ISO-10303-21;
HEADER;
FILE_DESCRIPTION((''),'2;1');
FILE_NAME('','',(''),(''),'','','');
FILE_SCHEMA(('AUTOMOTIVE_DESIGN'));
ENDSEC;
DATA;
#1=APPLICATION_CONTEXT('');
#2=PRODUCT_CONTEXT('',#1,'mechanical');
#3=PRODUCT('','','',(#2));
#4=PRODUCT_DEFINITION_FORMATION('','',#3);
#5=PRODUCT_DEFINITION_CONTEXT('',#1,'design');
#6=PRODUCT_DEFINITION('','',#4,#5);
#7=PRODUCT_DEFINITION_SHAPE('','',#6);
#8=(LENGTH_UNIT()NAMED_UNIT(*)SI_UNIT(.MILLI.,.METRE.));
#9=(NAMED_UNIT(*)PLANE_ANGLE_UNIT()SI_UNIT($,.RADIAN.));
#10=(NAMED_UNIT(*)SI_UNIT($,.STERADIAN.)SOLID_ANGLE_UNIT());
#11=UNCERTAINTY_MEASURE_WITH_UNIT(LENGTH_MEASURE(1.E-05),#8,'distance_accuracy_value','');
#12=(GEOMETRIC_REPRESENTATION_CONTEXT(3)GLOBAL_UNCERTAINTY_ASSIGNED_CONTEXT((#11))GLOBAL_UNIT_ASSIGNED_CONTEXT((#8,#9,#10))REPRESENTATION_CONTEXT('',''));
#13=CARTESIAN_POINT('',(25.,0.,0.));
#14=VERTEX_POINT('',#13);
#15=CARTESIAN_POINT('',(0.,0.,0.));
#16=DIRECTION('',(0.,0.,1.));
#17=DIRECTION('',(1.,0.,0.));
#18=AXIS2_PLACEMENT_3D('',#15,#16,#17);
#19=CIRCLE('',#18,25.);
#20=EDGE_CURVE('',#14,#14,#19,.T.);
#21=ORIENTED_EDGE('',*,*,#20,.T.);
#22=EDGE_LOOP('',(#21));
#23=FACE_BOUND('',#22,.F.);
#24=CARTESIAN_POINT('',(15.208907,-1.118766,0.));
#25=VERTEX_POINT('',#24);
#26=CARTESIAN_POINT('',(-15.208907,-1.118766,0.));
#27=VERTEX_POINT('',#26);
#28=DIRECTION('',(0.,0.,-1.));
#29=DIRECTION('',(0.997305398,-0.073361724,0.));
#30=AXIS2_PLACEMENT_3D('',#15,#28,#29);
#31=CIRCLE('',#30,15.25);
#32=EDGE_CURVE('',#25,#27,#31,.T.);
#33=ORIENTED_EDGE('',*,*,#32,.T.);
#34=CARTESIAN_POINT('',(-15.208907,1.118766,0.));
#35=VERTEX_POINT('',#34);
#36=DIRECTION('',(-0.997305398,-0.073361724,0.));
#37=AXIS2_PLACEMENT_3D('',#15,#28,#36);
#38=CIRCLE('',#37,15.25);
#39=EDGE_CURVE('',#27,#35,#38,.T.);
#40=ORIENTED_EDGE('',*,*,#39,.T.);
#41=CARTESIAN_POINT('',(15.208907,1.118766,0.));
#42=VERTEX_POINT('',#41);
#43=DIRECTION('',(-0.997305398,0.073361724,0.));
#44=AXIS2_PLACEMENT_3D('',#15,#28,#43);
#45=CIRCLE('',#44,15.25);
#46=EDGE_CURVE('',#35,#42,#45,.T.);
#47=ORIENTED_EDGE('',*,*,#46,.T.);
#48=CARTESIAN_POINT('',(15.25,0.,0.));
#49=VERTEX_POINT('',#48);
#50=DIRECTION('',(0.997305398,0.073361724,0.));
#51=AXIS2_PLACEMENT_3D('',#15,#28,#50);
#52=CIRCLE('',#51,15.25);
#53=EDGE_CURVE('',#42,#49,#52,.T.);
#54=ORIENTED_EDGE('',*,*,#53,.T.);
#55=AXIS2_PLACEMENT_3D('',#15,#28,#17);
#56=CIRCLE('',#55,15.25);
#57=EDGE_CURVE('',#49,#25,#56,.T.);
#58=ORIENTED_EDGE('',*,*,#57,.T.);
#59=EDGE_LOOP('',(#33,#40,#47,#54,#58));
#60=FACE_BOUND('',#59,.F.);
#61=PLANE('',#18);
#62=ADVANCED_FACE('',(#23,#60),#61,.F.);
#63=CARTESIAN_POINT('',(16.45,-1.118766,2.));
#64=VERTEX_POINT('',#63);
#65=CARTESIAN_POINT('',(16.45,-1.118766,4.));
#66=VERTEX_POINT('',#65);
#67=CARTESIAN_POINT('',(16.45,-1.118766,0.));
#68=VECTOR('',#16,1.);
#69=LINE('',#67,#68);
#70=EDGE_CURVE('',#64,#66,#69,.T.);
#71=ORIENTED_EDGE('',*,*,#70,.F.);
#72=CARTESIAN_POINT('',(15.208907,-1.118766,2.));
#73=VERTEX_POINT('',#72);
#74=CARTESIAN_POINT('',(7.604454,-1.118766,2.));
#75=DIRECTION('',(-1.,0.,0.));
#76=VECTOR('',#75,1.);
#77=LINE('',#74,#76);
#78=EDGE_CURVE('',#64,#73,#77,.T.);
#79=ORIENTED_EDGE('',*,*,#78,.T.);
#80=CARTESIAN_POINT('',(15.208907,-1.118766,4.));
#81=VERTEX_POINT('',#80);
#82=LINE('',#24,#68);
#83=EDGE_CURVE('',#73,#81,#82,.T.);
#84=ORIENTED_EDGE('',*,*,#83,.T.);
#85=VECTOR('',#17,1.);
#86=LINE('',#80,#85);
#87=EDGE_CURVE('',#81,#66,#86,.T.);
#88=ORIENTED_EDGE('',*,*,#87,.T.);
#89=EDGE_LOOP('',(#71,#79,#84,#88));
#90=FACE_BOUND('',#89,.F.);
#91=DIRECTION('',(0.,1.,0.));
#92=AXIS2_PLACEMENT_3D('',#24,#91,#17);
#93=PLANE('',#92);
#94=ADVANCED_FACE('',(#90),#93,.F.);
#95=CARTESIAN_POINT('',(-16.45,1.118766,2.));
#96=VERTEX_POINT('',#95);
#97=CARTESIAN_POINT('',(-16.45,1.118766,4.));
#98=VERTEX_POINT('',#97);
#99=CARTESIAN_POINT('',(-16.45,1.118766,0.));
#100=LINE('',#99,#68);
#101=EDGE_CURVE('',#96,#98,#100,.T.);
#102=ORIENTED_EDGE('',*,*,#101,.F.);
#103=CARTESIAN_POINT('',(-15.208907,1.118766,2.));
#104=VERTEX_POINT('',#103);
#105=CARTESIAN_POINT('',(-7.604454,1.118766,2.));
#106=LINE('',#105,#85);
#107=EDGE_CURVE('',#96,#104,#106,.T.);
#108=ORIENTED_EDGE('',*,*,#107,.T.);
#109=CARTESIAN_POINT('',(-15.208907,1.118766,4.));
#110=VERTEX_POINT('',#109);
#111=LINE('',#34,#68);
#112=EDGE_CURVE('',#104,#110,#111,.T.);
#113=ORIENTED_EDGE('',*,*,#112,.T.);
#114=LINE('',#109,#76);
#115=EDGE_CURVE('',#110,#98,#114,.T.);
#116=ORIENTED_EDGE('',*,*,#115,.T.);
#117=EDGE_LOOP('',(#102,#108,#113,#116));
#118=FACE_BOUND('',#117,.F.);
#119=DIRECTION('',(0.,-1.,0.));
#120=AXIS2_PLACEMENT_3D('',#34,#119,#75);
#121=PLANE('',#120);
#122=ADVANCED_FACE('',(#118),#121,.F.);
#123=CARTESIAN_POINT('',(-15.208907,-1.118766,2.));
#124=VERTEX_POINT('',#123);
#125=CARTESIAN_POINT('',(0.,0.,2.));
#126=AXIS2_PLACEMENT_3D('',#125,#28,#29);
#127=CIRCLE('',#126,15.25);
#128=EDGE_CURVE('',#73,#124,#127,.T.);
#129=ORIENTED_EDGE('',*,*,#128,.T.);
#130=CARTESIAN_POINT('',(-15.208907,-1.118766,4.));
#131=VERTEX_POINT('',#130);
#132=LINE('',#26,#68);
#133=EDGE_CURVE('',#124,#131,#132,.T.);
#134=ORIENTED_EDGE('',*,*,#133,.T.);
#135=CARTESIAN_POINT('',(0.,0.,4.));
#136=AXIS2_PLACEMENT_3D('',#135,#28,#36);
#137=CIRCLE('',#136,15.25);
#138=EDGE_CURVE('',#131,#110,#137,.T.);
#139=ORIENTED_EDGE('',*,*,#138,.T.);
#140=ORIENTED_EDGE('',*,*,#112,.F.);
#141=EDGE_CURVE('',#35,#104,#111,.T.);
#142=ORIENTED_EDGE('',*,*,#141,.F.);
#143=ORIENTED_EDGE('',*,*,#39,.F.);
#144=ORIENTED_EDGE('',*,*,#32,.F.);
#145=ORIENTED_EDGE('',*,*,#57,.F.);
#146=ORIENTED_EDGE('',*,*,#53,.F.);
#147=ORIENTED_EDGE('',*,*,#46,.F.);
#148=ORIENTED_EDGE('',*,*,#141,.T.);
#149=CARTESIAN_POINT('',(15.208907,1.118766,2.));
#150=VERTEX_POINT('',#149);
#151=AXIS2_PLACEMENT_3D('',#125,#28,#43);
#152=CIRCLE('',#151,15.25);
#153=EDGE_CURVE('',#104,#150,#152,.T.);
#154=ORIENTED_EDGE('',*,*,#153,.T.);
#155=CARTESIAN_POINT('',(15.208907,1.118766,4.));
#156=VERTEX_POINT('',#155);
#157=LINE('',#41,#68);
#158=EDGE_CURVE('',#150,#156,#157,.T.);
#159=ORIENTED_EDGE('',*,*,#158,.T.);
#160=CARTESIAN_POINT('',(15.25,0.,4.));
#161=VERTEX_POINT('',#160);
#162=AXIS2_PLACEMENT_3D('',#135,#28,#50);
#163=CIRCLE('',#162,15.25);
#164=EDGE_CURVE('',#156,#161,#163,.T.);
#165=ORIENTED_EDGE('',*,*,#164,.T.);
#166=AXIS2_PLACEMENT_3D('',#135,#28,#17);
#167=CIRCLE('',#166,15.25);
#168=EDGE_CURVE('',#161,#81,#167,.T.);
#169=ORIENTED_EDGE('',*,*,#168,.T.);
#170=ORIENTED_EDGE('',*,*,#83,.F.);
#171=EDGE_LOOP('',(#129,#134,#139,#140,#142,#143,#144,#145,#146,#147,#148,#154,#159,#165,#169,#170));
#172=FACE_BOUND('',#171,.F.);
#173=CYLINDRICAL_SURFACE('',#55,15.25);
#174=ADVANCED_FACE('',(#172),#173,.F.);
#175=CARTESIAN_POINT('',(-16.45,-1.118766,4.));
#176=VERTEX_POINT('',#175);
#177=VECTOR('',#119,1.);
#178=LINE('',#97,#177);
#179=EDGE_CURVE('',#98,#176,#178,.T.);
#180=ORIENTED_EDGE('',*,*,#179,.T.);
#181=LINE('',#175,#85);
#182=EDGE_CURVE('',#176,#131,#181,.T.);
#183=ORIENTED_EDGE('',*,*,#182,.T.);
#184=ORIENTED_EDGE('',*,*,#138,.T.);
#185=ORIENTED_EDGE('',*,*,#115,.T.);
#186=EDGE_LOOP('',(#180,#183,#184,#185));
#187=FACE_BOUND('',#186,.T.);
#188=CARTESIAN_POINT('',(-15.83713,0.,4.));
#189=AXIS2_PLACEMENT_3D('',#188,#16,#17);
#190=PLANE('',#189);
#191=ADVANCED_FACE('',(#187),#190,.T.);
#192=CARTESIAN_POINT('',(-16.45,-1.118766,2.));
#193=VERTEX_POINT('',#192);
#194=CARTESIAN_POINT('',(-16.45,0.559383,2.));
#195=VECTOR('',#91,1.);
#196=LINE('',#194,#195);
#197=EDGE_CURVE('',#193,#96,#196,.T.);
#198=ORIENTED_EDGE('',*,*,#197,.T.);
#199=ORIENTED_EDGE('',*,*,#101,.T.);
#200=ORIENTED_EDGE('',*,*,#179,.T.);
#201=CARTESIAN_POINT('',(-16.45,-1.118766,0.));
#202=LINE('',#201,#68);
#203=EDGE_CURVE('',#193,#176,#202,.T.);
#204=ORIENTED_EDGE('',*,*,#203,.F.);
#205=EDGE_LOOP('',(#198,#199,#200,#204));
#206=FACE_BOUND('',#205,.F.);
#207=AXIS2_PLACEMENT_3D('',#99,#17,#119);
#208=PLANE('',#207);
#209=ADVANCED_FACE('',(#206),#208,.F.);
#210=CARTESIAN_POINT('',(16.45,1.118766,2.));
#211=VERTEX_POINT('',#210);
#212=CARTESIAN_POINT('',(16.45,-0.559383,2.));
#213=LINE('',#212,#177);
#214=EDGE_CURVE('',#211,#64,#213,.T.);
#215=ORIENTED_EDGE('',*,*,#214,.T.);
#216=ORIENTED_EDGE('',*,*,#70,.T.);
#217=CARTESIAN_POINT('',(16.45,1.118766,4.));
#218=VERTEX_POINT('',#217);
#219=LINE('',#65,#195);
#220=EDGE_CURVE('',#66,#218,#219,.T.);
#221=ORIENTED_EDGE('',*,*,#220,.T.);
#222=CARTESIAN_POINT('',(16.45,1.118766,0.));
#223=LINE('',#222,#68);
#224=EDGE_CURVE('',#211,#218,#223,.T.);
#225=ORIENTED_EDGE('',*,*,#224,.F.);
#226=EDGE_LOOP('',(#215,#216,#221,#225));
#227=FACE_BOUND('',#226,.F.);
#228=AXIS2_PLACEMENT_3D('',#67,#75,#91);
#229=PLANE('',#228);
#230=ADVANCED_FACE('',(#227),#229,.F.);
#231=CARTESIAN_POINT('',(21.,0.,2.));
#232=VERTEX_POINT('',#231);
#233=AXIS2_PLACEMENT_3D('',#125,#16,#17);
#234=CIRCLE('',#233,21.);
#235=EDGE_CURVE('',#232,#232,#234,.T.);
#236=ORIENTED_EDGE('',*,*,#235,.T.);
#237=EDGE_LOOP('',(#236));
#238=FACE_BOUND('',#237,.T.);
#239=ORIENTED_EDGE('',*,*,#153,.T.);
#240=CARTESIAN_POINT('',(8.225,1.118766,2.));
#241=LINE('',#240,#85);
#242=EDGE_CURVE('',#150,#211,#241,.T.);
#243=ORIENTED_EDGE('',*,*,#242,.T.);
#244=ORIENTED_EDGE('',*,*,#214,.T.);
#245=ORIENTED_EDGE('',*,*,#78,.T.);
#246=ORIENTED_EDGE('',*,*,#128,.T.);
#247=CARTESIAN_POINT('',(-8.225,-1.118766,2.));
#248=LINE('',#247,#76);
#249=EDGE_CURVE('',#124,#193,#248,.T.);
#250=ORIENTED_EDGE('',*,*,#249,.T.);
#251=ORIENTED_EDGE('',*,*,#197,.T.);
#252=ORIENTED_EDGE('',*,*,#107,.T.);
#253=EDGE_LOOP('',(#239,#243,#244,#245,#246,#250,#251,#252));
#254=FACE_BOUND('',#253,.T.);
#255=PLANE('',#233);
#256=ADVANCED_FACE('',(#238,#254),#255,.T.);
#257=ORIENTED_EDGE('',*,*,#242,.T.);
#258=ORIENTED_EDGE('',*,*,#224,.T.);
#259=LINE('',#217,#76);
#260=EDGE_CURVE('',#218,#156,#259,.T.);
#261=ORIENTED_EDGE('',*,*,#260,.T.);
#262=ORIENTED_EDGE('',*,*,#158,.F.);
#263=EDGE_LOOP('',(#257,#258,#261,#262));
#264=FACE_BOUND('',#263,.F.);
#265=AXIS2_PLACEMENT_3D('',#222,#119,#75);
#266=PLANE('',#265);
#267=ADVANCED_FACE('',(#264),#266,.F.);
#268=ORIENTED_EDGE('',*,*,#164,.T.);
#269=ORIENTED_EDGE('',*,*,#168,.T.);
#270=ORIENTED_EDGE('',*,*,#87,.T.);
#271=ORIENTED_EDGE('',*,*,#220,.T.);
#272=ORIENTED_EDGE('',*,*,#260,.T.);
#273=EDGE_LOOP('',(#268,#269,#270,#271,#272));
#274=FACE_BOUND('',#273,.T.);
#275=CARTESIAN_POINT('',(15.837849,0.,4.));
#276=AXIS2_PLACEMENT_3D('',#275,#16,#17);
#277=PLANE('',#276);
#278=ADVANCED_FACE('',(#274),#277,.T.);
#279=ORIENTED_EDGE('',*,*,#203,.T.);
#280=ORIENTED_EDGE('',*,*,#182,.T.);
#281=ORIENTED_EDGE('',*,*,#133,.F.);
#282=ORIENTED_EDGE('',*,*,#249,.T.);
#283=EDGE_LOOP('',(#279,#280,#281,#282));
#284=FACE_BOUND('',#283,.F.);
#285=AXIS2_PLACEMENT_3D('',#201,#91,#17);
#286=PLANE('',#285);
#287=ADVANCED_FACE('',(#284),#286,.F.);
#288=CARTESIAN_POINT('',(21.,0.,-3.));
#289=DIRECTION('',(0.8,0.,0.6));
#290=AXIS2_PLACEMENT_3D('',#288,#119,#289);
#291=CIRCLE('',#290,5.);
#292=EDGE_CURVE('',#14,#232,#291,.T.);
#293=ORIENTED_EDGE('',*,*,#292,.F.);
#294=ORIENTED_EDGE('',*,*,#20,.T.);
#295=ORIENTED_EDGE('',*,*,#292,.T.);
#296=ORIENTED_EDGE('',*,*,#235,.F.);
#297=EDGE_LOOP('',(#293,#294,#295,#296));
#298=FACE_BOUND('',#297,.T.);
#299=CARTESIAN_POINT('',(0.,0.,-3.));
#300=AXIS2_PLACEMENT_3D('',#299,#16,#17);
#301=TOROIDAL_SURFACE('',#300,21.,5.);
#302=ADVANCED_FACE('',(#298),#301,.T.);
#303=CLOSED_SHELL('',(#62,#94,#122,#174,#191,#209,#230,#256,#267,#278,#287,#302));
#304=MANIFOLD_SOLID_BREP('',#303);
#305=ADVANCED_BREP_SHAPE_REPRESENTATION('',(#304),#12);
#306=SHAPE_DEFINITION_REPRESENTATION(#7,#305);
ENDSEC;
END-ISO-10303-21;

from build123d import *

# Parameters (mm, degrees)
F0_R     = 25
F1_DEPTH = 2
F3_DEPTH = 4


# Not quite as in the source:
# - a fillet or chamfer that OpenCascade refuses, or shapes differently, is made with other operations: its cross-section is extruded or revolved along the edge and cut away or added


with BuildPart() as f1:
    # F0 (on Top) → F1 (new body)
    with BuildSketch(Plane.XY):
        Circle(F0_R)
        with BuildLine():
            ThreePointArc((-15.2089073237, 1.1187662932), (0, 15.25), (15.2089073237, 1.1187662932))
            Line((15.2089073237, 1.1187662932), (16.45, 1.1187662932))
            Line((16.45, 1.1187662932), (16.45, -1.1187662932))
            Line((16.45, -1.1187662932), (15.2089073237, -1.1187662932))
            ThreePointArc((15.2089073237, -1.1187662932), (0, -15.25), (-15.2089073237, -1.1187662932))
            Line((-15.2089073237, -1.1187662932), (-16.45, -1.1187662932))
            Line((-16.45, -1.1187662932), (-16.45, 1.1187662932))
            Line((-16.45, 1.1187662932), (-15.2089073237, 1.1187662932))
        make_face(mode=Mode.SUBTRACT)
        with BuildLine():
            ThreePointArc((15.2089073237, 1.1187662932), (15.2397233683, 0.5597603565), (15.25, 0))
            ThreePointArc((15.25, 0), (15.2397233683, -0.5597603565), (15.2089073237, -1.1187662932))
            Line((15.2089073237, -1.1187662932), (16.45, -1.1187662932))
            Line((16.45, -1.1187662932), (16.45, 1.1187662932))
            Line((16.45, 1.1187662932), (15.2089073237, 1.1187662932))
        make_face()
        with BuildLine():
            ThreePointArc((-15.2089073237, -1.1187662932), (-15.25, 0), (-15.2089073237, 1.1187662932))
            Line((-15.2089073237, 1.1187662932), (-16.45, 1.1187662932))
            Line((-16.45, 1.1187662932), (-16.45, -1.1187662932))
            Line((-16.45, -1.1187662932), (-15.2089073237, -1.1187662932))
        make_face()
    extrude(amount=F1_DEPTH)

    # F2: fillet of radius 5 on 1 edges, made by hand

    # F2_s1 → F2_t2 (revolve, cut)
    with BuildSketch(Plane.XZ):
        with BuildLine():
            ThreePointArc((25, 0), (23.2360679775, 1.472135955), (21, 2))
            Line((21, 2), (25, 2))
            Line((25, 2), (25, 0))
        make_face()
    revolve(axis=Axis((0, 0, 2), (0, 0, 1)), mode=Mode.SUBTRACT)

    # F0 (on Top) → F3 (join)
    with BuildSketch(Plane.XY):
        with BuildLine():
            ThreePointArc((15.2089073237, 1.1187662932), (15.2397233683, 0.5597603565), (15.25, 0))
            ThreePointArc((15.25, 0), (15.2397233683, -0.5597603565), (15.2089073237, -1.1187662932))
            Line((15.2089073237, -1.1187662932), (16.45, -1.1187662932))
            Line((16.45, -1.1187662932), (16.45, 1.1187662932))
            Line((16.45, 1.1187662932), (15.2089073237, 1.1187662932))
        make_face()
        with BuildLine():
            ThreePointArc((-15.2089073237, -1.1187662932), (-15.25, 0), (-15.2089073237, 1.1187662932))
            Line((-15.2089073237, 1.1187662932), (-16.45, 1.1187662932))
            Line((-16.45, 1.1187662932), (-16.45, -1.1187662932))
            Line((-16.45, -1.1187662932), (-15.2089073237, -1.1187662932))
        make_face()
    extrude(amount=F3_DEPTH)


solid = f1.part
